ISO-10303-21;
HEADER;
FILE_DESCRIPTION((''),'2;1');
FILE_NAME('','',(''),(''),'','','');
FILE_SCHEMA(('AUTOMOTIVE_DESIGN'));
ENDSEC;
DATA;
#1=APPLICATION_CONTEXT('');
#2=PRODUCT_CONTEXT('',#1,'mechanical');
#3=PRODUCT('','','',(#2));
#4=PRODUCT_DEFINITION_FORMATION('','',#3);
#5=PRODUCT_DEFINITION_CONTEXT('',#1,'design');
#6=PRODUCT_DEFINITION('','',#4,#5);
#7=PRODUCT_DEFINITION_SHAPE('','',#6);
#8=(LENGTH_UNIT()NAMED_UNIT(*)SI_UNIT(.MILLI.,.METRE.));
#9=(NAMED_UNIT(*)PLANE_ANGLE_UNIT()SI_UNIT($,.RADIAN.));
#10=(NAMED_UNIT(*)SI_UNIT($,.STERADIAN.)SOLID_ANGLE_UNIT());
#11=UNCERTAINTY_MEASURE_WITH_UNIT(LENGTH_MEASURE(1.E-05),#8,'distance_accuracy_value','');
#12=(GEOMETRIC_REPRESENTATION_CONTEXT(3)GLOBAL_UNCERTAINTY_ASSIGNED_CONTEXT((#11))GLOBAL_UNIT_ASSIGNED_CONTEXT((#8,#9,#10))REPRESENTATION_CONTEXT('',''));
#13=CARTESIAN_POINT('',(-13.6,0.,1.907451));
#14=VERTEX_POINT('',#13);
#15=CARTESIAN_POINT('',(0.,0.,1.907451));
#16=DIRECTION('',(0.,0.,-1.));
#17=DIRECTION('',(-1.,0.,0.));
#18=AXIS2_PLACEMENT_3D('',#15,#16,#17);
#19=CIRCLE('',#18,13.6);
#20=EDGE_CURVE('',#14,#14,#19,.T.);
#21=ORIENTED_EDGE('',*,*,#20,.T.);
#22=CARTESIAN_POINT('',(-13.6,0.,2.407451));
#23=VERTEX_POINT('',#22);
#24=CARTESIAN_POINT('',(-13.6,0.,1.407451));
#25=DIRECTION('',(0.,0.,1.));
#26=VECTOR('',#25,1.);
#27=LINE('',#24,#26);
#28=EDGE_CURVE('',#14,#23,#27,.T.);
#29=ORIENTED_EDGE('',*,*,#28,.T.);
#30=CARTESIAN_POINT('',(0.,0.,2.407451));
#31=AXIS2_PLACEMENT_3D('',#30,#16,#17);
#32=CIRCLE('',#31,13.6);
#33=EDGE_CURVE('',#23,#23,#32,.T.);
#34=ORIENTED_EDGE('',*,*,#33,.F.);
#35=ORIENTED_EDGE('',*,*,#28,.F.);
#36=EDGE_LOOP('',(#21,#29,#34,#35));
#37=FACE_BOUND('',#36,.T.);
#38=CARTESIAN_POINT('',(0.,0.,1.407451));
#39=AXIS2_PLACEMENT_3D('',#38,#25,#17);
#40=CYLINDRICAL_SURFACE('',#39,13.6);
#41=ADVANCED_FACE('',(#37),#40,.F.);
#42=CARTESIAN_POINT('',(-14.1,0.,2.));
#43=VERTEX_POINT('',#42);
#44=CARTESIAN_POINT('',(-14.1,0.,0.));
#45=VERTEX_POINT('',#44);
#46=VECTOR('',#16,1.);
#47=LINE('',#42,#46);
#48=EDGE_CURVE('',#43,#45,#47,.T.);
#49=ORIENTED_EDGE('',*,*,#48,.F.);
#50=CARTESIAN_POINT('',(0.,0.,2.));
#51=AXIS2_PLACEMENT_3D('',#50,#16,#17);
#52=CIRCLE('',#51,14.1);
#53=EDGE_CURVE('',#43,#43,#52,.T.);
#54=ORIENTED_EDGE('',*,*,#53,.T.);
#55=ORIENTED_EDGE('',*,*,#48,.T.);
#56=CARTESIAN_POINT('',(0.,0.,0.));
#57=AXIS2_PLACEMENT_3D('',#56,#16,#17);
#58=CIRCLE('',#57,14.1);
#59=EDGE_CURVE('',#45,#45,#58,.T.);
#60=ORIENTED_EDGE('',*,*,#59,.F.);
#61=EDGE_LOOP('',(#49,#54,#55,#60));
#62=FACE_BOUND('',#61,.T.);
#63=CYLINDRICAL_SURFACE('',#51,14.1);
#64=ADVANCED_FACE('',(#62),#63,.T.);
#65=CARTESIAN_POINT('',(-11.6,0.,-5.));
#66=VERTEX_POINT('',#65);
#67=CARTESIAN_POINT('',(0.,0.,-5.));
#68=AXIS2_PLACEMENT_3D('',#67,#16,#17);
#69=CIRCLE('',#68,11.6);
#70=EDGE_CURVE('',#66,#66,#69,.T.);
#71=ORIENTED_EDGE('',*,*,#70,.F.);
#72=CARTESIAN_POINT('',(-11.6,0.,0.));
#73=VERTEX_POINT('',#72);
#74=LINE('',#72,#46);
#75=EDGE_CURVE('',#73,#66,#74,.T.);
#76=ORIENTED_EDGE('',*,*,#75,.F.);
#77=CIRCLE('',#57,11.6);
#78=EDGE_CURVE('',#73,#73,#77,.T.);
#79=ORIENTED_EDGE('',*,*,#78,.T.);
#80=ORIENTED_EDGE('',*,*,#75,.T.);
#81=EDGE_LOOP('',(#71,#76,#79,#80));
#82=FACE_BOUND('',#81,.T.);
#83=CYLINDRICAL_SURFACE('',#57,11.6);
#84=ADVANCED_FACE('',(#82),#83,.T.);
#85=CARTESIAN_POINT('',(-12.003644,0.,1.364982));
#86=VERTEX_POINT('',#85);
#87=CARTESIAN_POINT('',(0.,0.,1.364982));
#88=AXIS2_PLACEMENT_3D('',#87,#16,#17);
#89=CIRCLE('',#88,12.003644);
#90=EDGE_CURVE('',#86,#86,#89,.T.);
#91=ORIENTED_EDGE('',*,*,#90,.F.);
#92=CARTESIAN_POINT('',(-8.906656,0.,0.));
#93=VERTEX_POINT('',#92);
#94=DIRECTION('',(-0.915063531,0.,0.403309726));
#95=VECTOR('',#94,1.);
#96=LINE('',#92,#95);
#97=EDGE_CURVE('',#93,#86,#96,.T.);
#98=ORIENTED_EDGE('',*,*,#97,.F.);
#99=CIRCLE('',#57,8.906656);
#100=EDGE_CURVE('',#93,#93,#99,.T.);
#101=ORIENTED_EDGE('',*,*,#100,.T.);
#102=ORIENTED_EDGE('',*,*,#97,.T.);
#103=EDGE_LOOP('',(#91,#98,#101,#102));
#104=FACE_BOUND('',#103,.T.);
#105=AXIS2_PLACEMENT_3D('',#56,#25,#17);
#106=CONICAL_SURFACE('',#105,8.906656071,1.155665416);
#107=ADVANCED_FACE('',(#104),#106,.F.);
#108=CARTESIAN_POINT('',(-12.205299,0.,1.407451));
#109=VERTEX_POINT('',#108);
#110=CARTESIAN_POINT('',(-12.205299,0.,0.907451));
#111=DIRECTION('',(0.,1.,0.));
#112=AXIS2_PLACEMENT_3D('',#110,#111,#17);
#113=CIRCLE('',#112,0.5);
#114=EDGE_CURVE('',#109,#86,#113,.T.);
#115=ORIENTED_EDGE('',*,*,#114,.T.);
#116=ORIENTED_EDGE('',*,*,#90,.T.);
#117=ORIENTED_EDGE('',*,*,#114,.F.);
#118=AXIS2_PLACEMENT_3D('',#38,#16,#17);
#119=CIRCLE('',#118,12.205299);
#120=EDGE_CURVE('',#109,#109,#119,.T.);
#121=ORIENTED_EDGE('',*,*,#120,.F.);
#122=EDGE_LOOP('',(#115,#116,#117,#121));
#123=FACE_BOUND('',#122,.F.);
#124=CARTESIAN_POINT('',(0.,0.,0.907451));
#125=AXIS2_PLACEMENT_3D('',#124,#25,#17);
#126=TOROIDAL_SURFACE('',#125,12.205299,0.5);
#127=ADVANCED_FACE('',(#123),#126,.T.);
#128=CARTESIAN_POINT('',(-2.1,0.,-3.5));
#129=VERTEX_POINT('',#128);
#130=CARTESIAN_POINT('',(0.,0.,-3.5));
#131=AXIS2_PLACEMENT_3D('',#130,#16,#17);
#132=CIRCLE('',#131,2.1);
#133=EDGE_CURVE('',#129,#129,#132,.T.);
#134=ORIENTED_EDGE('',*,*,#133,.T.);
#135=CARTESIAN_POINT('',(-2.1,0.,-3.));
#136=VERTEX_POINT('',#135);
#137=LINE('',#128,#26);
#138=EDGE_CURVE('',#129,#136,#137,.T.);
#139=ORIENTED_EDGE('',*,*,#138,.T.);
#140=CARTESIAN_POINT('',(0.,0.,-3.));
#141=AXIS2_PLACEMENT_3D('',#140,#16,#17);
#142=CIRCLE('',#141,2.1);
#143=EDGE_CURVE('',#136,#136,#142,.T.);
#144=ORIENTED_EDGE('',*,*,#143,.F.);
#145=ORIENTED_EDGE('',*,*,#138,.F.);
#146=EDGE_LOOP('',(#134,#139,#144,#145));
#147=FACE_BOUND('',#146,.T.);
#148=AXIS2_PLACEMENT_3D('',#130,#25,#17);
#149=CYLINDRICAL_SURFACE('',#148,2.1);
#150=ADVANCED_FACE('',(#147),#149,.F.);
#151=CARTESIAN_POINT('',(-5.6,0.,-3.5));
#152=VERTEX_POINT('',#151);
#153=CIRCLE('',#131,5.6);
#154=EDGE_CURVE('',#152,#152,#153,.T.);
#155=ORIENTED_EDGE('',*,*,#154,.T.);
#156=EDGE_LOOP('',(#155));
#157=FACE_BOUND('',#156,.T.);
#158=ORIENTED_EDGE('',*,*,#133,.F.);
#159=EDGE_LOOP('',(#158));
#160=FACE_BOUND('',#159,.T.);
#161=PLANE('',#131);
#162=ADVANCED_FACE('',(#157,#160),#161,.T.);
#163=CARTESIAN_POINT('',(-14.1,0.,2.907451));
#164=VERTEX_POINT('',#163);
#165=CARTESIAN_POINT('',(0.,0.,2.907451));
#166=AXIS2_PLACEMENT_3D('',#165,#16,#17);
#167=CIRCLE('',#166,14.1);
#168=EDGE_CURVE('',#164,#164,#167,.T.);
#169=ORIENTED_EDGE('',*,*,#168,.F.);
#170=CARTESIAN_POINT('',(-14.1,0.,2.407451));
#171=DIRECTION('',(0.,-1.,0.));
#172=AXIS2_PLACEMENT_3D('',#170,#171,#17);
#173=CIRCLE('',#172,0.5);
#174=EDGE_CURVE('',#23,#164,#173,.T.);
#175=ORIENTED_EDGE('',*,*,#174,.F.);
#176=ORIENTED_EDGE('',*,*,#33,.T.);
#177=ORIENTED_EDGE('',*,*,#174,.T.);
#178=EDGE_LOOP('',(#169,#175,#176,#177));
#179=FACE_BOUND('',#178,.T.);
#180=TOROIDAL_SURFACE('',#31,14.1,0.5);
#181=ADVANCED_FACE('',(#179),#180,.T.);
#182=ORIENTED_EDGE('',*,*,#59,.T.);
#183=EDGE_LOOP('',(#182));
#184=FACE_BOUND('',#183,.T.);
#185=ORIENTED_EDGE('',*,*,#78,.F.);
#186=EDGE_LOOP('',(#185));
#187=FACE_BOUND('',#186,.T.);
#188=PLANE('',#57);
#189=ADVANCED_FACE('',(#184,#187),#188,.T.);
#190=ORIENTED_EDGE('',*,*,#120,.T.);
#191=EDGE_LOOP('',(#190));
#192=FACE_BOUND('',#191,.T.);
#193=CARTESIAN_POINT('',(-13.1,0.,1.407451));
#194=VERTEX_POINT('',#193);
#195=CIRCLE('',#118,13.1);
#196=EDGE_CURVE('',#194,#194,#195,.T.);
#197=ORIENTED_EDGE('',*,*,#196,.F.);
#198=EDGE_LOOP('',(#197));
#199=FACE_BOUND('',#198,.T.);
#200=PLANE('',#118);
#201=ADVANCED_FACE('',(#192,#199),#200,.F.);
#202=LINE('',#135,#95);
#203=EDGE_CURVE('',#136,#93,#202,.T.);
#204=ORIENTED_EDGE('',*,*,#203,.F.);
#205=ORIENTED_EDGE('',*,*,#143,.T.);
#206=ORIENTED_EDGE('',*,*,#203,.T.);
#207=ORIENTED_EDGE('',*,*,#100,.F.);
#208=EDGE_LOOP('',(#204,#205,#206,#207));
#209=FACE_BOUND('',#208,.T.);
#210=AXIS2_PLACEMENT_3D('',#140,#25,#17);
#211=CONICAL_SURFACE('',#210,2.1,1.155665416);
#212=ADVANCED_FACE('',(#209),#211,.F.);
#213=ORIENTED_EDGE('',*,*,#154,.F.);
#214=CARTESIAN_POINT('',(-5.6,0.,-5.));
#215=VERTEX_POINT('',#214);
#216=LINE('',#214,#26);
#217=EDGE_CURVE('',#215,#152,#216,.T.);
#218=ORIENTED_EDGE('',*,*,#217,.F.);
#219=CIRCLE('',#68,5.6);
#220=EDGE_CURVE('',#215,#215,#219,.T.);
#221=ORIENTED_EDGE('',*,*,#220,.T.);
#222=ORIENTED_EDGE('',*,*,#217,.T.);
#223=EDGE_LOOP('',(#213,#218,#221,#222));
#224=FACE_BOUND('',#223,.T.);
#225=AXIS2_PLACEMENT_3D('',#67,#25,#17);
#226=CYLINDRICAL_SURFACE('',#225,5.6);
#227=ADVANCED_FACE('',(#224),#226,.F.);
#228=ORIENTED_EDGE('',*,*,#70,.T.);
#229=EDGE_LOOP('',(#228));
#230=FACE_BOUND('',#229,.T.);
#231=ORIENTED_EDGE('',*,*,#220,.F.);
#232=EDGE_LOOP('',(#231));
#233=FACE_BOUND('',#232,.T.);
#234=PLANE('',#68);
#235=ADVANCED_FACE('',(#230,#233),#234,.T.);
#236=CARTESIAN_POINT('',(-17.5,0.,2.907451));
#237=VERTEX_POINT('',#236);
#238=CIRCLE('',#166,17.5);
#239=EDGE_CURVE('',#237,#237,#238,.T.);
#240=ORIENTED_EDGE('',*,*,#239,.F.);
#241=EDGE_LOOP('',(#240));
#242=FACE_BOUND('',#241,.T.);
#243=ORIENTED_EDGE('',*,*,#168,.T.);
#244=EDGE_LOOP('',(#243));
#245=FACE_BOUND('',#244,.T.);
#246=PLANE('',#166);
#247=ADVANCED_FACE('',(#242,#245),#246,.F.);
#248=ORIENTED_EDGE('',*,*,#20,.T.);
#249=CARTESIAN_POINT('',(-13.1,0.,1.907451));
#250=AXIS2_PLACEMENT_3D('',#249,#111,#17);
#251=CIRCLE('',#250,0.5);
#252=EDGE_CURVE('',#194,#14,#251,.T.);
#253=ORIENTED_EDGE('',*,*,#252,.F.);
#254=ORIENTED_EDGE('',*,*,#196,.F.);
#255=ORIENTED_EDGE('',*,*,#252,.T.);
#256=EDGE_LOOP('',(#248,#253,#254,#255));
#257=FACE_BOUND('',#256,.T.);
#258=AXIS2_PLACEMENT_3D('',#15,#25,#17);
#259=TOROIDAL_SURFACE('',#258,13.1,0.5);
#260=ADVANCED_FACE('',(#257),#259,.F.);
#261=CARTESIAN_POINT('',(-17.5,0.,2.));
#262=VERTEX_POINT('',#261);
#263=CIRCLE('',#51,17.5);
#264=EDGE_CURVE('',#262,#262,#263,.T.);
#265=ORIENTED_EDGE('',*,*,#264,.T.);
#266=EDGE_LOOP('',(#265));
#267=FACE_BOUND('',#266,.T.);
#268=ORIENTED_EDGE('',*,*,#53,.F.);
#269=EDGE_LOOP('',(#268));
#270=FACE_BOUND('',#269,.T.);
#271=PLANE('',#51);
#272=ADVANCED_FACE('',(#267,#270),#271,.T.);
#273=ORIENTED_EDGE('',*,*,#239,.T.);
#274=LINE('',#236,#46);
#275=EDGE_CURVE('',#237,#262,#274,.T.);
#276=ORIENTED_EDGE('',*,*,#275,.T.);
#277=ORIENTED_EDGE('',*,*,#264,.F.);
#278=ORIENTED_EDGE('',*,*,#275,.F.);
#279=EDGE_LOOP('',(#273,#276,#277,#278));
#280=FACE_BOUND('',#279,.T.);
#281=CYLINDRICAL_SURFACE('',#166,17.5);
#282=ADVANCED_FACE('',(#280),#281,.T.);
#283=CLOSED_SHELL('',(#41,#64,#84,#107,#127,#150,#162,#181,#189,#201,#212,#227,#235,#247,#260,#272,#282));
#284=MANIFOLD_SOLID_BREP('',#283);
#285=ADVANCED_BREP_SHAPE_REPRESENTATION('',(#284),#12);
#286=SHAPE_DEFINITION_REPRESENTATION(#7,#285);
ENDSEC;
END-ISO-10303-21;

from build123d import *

# Parameters (mm, degrees)
F4_R = 0.5
F5_R = 0.5
F6_R = 0.5


# Not quite as in the source:
# - a feature of the source that left no trace in its solid (it failed there, or was rolled back) is left out


with BuildPart() as f1:
    # F0 (on Front) → F1 (revolve)
    with BuildSketch(Plane.XZ):
        Polygon((-2.1, -3), (-8.9066560708, 0), (-11.6, 0), (-11.6, -5), (-5.6, -5), (-5.6, -3.5), (-2.1, -3.5), align=None)
        Polygon((-11.6, 0), (-8.9066560708, 0), (-12.1, 1.4074505437), (-13.6, 1.4074505437), (-13.6, 2.9074505437), (-17.5, 2.9074505437), (-17.5, 2), (-14.1, 2), (-14.1, 0), align=None)
    revolve(axis=Axis((0, 0, -7.5), (0, 0, -1)))

    # F4
    f4_edges = [f1.edges().sort_by_distance(p)[0] for p in [
        (13.6, 0, 1.407451),
    ]]
    fillet(f4_edges, radius=F4_R)

    # F5
    f5_edges = [f1.edges().sort_by_distance(p)[0] for p in [
        (12.1, 0, 1.407451),
    ]]
    fillet(f5_edges, radius=F5_R)

    # F6
    f6_edges = [f1.edges().sort_by_distance(p)[0] for p in [
        (13.6, 0, 2.907451),
    ]]
    fillet(f6_edges, radius=F6_R)


solid = f1.part
